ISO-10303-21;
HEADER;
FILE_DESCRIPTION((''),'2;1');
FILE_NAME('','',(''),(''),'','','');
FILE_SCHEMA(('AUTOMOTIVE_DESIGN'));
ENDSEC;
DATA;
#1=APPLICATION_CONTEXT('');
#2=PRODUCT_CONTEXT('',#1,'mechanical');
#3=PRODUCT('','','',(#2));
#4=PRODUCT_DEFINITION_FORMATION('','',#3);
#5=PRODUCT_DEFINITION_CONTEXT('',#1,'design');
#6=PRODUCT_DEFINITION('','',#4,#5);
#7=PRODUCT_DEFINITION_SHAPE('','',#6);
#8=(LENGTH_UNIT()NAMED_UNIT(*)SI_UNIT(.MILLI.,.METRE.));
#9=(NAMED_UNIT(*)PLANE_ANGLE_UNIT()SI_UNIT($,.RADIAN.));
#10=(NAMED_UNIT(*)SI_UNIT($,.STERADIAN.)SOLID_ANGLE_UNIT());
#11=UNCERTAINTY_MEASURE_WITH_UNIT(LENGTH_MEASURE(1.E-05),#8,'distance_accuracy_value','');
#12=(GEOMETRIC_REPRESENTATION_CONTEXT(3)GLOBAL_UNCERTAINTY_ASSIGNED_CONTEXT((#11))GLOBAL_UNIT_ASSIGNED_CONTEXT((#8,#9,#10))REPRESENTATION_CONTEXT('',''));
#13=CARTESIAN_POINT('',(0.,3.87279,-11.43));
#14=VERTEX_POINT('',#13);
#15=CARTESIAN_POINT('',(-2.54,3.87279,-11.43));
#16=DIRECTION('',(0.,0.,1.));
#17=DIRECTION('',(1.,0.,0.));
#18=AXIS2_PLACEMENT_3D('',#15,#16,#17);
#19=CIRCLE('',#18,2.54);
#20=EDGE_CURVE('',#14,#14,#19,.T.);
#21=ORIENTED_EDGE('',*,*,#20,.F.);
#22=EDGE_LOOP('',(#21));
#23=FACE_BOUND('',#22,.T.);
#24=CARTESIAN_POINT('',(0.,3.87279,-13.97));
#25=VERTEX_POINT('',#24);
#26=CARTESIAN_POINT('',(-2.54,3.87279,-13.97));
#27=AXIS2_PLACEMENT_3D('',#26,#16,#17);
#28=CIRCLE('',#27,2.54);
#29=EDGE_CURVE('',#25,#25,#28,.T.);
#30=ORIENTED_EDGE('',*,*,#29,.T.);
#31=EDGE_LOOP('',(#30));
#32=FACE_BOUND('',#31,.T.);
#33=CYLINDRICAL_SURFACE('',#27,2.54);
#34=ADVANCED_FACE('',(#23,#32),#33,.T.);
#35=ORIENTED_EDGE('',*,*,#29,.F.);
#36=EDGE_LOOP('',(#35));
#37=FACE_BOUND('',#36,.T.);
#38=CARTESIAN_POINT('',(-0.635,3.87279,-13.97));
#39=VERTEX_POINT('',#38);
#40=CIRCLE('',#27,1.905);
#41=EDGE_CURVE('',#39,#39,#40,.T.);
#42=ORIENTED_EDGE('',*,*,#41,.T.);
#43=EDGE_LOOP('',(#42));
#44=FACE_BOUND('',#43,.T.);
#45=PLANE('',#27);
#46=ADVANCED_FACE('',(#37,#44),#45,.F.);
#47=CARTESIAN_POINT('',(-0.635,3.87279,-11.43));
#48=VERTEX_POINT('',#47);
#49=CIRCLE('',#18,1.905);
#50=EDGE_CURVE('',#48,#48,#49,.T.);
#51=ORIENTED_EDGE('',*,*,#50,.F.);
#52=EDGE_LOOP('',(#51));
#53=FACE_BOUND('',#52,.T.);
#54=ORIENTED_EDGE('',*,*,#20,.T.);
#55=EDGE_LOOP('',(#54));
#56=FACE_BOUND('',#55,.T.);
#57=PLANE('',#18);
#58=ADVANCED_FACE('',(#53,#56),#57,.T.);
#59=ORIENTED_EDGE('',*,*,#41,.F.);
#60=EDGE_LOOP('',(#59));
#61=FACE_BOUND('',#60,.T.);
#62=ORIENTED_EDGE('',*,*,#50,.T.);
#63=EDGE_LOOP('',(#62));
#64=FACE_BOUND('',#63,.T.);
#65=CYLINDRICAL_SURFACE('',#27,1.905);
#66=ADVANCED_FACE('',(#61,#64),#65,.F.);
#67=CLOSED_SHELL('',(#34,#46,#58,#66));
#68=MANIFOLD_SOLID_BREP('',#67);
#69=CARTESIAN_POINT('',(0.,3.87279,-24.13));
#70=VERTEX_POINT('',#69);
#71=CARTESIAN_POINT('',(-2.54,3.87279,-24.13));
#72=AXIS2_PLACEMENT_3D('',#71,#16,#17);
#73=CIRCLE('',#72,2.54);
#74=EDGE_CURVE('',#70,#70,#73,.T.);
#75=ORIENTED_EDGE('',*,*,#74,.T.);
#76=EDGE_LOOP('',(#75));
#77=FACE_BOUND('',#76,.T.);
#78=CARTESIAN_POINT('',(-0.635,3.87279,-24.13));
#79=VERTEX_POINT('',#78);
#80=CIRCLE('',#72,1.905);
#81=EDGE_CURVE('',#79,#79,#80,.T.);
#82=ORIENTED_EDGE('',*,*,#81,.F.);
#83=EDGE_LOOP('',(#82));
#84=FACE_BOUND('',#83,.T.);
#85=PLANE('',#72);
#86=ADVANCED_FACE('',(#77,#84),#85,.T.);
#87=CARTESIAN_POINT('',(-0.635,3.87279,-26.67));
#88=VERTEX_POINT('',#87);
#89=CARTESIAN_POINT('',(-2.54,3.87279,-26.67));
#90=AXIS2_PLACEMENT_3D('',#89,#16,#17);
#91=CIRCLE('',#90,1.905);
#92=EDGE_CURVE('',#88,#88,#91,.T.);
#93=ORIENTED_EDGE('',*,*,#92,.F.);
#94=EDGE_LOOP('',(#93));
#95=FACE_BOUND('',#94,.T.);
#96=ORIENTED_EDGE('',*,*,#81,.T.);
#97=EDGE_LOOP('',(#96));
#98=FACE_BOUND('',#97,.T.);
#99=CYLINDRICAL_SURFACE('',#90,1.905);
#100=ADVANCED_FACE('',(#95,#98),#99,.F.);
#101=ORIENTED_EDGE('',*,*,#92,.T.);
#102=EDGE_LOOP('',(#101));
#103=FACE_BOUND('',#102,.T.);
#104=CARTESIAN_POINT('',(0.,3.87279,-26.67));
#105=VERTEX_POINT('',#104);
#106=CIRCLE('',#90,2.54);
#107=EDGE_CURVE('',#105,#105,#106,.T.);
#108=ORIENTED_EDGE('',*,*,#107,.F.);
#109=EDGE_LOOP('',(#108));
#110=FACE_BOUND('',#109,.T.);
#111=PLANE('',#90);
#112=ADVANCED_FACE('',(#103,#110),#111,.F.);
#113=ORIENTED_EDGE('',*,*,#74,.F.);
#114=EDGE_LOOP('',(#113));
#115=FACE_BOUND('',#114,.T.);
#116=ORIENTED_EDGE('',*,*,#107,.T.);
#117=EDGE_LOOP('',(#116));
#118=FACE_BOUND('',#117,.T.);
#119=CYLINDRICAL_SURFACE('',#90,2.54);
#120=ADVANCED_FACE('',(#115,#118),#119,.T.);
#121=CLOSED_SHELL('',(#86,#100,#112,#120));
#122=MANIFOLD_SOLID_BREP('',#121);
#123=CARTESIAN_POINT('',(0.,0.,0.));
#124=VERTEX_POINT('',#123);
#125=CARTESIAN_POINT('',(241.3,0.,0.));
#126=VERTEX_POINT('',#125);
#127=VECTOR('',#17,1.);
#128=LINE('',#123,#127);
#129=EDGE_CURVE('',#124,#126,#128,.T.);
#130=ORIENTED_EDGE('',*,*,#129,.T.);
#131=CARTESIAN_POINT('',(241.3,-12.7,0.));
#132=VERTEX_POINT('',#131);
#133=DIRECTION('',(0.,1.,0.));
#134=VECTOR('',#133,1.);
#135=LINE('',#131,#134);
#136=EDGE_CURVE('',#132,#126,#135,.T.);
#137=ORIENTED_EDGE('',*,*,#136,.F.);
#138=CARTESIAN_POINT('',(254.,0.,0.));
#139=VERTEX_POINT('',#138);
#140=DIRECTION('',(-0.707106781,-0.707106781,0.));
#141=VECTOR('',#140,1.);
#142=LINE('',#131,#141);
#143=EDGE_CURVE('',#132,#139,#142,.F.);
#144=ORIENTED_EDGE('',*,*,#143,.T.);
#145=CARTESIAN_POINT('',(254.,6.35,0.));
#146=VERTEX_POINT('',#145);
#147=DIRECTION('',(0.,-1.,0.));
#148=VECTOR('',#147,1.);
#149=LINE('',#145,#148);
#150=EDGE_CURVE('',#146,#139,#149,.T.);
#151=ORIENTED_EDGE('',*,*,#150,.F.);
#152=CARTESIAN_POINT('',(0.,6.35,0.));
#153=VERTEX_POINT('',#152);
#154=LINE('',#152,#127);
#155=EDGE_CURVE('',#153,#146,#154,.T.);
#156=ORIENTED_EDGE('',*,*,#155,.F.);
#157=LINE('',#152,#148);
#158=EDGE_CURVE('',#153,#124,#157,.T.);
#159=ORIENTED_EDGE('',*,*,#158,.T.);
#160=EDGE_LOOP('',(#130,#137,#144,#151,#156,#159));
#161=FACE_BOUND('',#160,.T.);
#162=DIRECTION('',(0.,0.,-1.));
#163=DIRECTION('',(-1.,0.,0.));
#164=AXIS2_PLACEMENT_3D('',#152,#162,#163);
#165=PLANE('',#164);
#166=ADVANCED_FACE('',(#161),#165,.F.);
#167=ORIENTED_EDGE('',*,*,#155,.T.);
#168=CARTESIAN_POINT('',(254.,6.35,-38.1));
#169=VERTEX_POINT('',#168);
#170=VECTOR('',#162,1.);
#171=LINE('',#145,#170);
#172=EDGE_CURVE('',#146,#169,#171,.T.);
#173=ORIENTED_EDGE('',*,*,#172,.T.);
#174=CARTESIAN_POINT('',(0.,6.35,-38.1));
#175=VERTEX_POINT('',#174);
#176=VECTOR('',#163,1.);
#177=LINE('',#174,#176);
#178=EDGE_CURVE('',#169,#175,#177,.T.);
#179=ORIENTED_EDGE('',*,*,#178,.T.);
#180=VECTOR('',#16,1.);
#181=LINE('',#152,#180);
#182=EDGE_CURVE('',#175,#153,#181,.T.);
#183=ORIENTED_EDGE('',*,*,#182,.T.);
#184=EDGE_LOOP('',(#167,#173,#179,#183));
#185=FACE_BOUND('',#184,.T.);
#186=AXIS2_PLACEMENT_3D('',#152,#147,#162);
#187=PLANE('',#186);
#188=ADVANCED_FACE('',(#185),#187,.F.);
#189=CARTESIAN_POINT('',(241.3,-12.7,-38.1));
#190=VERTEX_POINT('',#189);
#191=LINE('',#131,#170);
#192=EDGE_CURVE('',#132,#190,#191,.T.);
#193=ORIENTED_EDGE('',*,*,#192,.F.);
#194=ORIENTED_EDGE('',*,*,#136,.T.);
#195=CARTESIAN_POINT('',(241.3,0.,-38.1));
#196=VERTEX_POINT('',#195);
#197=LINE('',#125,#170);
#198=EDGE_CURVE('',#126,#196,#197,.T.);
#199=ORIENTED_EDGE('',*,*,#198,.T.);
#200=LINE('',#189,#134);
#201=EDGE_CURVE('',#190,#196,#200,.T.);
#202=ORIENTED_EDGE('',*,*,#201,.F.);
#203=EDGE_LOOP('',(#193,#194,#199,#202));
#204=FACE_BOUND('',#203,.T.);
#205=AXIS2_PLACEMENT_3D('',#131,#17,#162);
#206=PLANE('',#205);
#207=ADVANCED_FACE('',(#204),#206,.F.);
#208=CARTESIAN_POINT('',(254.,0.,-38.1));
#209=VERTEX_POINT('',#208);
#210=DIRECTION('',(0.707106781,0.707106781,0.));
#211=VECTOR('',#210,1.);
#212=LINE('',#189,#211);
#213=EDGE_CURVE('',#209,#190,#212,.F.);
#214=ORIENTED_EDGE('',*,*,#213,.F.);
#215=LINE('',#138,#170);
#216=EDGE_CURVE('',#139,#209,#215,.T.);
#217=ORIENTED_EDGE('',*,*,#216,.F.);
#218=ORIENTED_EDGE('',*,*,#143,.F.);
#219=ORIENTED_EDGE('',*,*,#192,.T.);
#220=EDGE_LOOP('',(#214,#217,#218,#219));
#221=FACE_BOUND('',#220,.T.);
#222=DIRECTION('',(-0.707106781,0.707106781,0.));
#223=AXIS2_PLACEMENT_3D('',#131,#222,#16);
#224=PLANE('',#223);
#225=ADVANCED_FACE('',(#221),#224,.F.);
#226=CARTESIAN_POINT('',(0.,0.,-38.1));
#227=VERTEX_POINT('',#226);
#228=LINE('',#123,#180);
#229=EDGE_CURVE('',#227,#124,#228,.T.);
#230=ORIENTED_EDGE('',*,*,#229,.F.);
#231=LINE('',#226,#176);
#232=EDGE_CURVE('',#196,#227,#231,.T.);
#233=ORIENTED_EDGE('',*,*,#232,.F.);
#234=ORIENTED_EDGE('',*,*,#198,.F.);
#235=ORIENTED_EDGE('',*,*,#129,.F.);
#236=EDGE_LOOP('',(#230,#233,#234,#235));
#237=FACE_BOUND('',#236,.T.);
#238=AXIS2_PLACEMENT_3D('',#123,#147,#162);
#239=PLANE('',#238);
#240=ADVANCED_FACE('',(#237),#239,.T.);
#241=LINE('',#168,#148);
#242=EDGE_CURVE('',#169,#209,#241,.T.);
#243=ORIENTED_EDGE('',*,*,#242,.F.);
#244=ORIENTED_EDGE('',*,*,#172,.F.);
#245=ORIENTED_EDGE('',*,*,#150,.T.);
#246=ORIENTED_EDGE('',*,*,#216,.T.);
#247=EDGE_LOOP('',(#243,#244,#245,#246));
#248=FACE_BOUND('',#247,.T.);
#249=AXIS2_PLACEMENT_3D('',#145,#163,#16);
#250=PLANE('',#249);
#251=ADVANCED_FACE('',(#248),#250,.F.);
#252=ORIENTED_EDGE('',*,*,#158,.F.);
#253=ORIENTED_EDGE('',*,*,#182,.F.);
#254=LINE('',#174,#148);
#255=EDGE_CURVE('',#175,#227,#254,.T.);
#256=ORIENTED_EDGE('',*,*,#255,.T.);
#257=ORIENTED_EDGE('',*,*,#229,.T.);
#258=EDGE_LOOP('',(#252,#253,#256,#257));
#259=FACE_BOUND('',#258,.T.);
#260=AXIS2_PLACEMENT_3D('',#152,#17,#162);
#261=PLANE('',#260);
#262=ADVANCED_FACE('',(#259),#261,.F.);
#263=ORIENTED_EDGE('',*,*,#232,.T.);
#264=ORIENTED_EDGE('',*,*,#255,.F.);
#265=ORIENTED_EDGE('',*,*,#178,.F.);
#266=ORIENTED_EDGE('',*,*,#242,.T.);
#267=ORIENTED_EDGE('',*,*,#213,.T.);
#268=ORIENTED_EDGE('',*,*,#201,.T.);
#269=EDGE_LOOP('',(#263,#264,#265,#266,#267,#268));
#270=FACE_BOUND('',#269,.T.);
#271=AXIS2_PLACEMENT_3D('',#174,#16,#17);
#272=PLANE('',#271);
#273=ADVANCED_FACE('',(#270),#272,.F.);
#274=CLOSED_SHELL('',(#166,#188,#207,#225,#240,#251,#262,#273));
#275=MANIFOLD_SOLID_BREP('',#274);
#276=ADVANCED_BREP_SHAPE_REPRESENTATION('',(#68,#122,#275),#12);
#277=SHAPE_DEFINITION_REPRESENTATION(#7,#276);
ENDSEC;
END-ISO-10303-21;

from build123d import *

# Parameters (mm, degrees)
SKETCH1_W           = 254
SKETCH1_H           = 38.1
BOSS_EXTRUDE1_DEPTH = 6.35
SKETCH2_R           = 2.54
SKETCH2_R_2         = 1.905
BOSS_EXTRUDE2_DEPTH = 1.27
LPATTERN1_COUNT     = 2
LPATTERN1_PITCH     = 12.7
SKETCH5_W           = 12.7
SKETCH5_H           = 38.1
BOSS_EXTRUDE3_DEPTH = 12.7
CHAMFER1_SIZE       = 12.7


with BuildPart() as part:
    # Sketch1 → Boss-Extrude1 (new body)
    with BuildSketch(Plane(origin=(0, 0, 0), x_dir=(1, 0, 0), z_dir=(0, 1, 0))):
        with Locations((127, 19.05)):
            Rectangle(SKETCH1_W, SKETCH1_H)
    extrude(amount=BOSS_EXTRUDE1_DEPTH)

    # Sketch5 → Boss-Extrude3 (add)
    with BuildSketch(Plane.XZ):
        with Locations((247.65, -19.05)):
            Rectangle(SKETCH5_W, SKETCH5_H)
    extrude(amount=BOSS_EXTRUDE3_DEPTH)

    # Chamfer1
    chamfer1_edges = [part.edges().sort_by_distance(p)[0] for p in [
        (254, -12.7, -19.05),
    ]]
    chamfer(chamfer1_edges, length=CHAMFER1_SIZE - 0.0001)  # a hair under: the kernel refuses the full size


with BuildPart() as body_2:
    # Sketch2 → Boss-Extrude2 (new, symmetric)
    with BuildSketch(Plane.XY.offset(-12.7)):
        with Locations((-2.54, 3.872789775)):
            Circle(SKETCH2_R)
        with Locations((-2.54, 3.872789775)):
            Circle(SKETCH2_R_2, mode=Mode.SUBTRACT)
    boss_extrude2 = extrude(amount=BOSS_EXTRUDE2_DEPTH, both=True)


with BuildPart() as lpattern1_1:
    # LPattern1: Boss-Extrude2 ×2
    with Locations(*[(0, 0, -i * LPATTERN1_PITCH) for i in range(1, LPATTERN1_COUNT)]):
        add(boss_extrude2)


solid = Compound([part.part, body_2.part, lpattern1_1.part])
